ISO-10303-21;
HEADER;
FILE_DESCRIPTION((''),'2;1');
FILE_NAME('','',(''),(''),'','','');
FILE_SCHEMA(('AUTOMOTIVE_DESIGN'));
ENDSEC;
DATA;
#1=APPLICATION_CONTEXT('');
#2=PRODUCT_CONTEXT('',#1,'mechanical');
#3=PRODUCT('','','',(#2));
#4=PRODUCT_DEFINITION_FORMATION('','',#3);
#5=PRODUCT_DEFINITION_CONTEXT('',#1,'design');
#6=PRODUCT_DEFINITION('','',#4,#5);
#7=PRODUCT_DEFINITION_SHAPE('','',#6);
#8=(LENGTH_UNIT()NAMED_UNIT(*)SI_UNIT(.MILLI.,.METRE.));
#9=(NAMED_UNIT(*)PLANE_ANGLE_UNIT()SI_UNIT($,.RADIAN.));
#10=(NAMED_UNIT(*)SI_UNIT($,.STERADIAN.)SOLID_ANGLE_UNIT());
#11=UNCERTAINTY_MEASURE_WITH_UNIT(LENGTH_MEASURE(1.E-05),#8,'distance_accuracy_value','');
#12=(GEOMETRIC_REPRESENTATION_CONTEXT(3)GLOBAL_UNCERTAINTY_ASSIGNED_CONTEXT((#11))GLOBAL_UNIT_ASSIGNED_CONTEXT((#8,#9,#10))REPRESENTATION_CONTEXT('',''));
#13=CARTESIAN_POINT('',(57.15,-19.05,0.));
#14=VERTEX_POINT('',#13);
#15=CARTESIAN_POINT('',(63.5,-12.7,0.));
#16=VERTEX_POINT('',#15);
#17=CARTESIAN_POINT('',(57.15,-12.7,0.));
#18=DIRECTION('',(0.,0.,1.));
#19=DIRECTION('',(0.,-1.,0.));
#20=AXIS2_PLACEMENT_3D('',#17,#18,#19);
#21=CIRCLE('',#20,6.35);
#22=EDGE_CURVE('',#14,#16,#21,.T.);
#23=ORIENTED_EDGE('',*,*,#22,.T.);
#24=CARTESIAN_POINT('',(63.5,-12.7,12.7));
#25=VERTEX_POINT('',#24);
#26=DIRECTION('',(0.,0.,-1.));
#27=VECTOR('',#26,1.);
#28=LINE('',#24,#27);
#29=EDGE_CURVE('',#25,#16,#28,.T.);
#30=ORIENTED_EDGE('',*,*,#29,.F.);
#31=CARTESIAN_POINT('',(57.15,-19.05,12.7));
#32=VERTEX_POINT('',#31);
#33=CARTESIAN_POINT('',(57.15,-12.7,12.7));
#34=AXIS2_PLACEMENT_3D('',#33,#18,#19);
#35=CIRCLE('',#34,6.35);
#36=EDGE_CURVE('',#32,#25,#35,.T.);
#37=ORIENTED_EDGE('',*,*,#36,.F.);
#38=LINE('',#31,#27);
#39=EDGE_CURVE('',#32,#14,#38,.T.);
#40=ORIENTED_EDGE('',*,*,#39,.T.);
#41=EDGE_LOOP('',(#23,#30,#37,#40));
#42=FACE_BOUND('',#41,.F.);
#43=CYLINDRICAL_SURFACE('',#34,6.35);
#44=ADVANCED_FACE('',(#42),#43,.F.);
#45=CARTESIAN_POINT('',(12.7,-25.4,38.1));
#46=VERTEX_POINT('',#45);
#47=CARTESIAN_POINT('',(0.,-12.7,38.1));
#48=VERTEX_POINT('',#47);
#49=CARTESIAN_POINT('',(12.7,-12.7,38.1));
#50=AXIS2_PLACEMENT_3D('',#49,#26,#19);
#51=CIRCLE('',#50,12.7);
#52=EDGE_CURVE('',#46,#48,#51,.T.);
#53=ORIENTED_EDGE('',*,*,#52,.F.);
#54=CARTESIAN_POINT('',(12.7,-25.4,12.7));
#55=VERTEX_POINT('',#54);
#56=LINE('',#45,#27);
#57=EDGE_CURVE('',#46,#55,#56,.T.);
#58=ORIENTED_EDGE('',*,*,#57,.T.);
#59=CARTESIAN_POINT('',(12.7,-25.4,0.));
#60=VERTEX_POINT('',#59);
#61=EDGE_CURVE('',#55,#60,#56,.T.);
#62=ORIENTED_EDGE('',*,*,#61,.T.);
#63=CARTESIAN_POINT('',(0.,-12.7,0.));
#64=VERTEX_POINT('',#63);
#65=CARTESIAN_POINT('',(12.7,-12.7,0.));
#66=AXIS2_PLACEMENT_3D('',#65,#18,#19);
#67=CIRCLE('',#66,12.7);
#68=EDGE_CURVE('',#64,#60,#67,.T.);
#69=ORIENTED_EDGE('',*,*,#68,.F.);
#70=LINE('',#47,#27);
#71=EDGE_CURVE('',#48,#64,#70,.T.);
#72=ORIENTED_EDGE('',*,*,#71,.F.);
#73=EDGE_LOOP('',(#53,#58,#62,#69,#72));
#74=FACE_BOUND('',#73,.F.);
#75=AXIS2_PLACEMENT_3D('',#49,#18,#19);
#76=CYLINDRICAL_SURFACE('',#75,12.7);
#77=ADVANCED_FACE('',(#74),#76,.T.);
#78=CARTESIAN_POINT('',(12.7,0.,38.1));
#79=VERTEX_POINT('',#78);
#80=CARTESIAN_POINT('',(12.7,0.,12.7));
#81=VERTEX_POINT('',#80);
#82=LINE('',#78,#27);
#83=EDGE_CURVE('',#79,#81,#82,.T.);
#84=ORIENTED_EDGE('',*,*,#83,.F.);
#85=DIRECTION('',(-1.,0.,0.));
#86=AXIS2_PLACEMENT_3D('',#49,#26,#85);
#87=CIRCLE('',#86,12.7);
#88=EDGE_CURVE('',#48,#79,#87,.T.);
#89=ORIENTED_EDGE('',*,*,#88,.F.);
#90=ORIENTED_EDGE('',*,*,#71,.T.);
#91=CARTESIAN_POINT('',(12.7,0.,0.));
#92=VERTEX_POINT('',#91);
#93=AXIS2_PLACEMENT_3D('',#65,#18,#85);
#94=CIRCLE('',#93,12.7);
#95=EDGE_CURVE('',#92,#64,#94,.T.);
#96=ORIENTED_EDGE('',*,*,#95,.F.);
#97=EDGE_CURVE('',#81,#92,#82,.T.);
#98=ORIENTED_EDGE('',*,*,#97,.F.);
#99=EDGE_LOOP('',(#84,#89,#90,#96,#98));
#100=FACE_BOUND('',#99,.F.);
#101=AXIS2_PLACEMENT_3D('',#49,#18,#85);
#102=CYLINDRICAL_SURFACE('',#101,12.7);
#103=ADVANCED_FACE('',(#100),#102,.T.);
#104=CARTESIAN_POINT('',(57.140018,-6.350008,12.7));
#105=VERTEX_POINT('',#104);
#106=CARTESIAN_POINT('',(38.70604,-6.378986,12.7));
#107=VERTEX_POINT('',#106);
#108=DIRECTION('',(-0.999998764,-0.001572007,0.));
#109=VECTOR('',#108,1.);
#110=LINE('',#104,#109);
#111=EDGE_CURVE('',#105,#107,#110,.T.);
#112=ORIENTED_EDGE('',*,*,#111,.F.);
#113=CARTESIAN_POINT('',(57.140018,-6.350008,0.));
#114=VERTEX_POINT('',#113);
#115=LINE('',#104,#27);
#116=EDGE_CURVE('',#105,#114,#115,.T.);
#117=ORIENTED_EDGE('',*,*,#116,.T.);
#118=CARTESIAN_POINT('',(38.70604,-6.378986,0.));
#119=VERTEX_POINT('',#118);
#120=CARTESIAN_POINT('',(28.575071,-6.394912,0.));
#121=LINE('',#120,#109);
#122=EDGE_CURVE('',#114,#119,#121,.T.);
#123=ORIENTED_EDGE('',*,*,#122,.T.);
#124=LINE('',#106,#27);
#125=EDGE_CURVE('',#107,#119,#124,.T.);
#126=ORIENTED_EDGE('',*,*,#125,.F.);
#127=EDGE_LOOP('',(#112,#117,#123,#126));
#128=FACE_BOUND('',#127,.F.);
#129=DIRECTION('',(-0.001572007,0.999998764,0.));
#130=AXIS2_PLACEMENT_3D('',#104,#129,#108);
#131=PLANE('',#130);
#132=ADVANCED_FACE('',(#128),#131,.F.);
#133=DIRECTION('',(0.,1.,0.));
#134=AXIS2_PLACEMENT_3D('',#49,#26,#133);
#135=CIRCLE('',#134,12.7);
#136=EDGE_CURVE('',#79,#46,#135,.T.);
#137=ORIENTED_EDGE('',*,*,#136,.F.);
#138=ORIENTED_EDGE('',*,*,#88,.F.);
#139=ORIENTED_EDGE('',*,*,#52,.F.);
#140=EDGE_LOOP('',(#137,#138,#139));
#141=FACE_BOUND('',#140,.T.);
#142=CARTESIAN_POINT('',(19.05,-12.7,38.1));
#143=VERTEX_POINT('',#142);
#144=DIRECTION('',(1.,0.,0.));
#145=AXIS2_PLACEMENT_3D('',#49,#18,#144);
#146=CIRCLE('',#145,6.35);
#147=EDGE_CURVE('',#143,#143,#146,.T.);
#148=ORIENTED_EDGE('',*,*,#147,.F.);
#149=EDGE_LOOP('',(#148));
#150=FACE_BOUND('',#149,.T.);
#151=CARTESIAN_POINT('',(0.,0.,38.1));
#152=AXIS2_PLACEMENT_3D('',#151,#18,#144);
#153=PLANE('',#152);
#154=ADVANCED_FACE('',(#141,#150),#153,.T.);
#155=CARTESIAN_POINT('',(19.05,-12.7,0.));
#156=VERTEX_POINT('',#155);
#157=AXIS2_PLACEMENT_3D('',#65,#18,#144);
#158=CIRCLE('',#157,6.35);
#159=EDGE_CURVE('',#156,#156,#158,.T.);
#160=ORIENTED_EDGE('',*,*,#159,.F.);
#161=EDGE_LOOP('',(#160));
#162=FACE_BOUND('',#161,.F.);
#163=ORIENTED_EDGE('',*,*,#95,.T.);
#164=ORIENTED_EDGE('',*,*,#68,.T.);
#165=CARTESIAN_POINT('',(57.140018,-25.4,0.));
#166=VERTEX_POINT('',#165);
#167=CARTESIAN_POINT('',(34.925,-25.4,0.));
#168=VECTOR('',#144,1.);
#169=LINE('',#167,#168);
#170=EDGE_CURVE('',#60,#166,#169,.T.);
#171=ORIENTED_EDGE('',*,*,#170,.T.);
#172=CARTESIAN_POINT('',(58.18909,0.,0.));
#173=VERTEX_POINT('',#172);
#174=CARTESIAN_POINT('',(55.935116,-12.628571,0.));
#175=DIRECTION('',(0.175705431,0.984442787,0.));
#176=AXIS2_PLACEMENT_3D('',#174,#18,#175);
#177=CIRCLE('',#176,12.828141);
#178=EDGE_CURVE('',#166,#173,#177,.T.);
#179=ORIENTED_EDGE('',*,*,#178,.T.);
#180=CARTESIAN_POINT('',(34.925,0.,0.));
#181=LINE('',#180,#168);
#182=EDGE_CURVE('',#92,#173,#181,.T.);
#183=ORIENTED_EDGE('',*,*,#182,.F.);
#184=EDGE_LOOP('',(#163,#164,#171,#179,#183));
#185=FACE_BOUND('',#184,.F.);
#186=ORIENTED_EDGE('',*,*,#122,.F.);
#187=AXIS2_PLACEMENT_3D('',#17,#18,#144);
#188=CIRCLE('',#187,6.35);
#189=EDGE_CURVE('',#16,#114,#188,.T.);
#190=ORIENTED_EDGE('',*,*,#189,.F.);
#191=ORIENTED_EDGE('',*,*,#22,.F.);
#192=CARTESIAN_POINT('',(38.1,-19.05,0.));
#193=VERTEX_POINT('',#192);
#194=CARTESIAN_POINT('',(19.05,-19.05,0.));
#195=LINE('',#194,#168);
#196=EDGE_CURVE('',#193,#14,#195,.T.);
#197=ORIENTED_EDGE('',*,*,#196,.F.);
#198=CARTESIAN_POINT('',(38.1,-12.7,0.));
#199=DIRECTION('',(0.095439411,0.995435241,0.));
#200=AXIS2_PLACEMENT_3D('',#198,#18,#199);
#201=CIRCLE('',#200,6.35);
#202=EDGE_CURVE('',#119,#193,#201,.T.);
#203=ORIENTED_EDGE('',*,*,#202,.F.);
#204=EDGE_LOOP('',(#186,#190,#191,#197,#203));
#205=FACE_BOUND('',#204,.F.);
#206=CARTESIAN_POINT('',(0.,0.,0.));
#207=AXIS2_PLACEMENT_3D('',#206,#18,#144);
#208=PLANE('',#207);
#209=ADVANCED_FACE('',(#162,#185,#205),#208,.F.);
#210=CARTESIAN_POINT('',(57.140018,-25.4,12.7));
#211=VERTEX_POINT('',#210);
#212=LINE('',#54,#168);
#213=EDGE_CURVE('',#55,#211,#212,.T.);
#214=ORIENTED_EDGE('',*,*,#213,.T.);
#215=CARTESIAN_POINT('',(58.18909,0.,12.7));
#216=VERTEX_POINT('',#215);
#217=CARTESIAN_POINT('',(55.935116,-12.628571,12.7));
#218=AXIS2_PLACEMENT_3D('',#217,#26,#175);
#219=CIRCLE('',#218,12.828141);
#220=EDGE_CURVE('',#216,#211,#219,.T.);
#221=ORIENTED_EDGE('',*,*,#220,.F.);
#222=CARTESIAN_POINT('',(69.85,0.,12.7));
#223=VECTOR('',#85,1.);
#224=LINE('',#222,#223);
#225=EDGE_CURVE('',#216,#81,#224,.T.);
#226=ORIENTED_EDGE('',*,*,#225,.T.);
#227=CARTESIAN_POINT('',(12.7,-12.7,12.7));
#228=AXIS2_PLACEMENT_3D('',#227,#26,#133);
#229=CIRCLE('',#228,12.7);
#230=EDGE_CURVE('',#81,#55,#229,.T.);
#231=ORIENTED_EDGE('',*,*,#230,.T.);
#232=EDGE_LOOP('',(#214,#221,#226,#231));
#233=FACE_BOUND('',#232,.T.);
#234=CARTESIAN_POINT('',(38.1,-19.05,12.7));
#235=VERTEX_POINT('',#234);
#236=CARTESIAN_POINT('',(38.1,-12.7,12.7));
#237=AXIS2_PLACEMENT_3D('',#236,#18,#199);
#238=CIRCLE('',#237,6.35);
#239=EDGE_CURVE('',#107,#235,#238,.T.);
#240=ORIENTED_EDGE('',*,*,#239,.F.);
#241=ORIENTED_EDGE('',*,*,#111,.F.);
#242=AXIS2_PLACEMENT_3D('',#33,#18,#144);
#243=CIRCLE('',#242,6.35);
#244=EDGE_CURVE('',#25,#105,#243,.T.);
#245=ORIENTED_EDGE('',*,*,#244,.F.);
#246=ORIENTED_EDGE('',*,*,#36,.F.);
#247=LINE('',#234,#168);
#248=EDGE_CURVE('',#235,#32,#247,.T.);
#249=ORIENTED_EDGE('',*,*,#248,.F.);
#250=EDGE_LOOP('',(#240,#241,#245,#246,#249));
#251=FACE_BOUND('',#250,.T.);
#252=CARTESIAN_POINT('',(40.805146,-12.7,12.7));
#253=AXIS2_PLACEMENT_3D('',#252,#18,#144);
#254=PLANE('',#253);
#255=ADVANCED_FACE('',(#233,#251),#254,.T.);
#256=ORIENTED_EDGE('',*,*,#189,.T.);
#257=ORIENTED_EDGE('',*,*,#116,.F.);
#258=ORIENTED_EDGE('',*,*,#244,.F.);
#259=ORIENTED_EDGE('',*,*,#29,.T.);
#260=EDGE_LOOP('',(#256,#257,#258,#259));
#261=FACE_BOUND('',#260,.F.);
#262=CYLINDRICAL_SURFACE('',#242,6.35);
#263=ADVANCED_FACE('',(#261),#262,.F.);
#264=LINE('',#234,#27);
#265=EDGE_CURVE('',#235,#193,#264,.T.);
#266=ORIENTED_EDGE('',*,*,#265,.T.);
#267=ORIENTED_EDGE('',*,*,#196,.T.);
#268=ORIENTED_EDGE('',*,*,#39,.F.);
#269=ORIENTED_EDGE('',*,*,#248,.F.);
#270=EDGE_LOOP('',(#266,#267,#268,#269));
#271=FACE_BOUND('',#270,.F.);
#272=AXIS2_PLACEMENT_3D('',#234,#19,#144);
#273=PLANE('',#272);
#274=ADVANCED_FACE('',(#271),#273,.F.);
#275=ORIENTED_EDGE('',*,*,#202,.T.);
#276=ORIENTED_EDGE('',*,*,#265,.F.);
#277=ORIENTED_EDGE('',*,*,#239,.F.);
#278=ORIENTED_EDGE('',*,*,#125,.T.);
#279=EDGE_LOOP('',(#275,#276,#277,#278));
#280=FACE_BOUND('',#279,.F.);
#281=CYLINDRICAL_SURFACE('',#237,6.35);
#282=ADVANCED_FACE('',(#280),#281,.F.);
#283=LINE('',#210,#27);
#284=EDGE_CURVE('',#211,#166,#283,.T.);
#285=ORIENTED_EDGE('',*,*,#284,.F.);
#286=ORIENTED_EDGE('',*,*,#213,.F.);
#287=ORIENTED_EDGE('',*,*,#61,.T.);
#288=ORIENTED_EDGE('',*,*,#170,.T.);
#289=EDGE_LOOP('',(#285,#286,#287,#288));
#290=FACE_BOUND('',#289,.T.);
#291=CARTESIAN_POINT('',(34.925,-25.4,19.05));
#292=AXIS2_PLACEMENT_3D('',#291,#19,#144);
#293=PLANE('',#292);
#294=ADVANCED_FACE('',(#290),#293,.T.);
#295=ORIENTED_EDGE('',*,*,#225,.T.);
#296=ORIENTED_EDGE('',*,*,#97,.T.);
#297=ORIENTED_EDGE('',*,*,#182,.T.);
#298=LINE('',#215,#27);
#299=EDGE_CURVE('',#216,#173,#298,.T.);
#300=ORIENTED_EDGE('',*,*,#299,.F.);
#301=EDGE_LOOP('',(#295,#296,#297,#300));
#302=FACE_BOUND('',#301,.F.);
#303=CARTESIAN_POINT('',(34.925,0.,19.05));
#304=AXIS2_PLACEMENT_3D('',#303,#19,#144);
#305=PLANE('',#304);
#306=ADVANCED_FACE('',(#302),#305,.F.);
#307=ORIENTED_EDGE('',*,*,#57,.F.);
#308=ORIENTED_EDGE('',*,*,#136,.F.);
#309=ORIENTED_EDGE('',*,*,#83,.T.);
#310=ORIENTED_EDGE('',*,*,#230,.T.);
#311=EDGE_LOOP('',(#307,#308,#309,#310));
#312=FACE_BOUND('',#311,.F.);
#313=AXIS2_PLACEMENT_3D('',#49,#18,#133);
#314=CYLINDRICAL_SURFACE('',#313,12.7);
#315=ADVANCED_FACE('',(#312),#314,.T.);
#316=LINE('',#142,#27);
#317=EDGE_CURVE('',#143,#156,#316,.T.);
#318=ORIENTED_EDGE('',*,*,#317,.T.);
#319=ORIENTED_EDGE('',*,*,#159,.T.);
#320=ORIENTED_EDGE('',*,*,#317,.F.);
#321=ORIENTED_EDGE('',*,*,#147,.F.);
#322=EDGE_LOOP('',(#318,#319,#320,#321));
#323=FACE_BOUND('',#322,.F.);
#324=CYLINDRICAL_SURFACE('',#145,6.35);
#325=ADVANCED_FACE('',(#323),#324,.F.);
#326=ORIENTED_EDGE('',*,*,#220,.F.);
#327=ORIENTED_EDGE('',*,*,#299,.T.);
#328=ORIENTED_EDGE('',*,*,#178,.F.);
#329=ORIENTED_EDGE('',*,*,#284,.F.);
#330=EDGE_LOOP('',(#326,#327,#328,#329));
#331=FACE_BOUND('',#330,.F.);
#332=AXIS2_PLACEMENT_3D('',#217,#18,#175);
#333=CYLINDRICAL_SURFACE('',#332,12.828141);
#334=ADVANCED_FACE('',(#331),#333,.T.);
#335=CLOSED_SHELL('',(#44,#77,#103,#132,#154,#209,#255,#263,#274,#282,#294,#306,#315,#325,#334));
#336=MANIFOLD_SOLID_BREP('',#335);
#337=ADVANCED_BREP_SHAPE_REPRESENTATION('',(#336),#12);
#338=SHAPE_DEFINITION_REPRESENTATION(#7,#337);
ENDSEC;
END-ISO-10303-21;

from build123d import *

# Parameters (mm, degrees)
F0_W      = 69.85
F0_H      = 38.1
F1_DEPTH  = 25.4
F5_DEPTH  = 50.8
F7_DEPTH  = 25.4
F8_R      = 6.35
F9_DEPTH  = 50.8
F11_DEPTH = 25.4
F13_DEPTH = 25.4


# Not quite as in the source:
# - a feature of the source that left no trace in its solid (it failed there, or was rolled back) is left out


with BuildPart() as f1:
    # F0 (on Front) → F1 (new body)
    with BuildSketch(Plane.XZ):
        with Locations((34.925, 19.05)):
            Rectangle(F0_W, F0_H)
    extrude(amount=F1_DEPTH)

    # F4 (on face) → F5 (cut)
    with BuildSketch(Plane.XY.offset(38.1)):
        with BuildLine():
            ThreePointArc((0, -12.7), (3.7197438789, -3.7197438789), (12.7, 0))
            Line((12.7, 0), (0, 0))
            Line((0, 0), (0, -12.7))
        make_face()
        with BuildLine():
            Line((0, -25.4), (12.7, -25.4))
            ThreePointArc((12.7, -25.4), (3.7197438789, -21.6802561211), (0, -12.7))
            Line((0, -12.7), (0, -25.4))
        make_face()
    extrude(amount=-F5_DEPTH, mode=Mode.SUBTRACT)

    # F6 (on face) → F7 (cut)
    with BuildSketch(Plane.XY.offset(38.1)):
        with BuildLine():
            ThreePointArc((12.7, 0), (25.4, -12.7), (12.7, -25.4))
            Line((12.7, -25.4), (69.85, -25.4))
            Line((69.85, -25.4), (69.85, 0))
            Line((69.85, 0), (12.7, 0))
        make_face()
    extrude(amount=-F7_DEPTH, mode=Mode.SUBTRACT)

    # F8 (on face) → F9 (cut)
    with BuildSketch(Plane.XY.offset(38.1)):
        with Locations((12.7, -12.7)):
            Circle(F8_R)
    extrude(amount=-F9_DEPTH, mode=Mode.SUBTRACT)

    # F10 (on face) → F11 (cut)
    with BuildSketch(Plane.XY.offset(12.7)):
        with BuildLine():
            ThreePointArc((38.1, -19.05), (42.5901280605, -17.1901280605), (44.45, -12.7))
            ThreePointArc((44.45, -12.7), (42.7995135722, -8.4295114817), (38.7060402567, -6.37898622))
            Line((38.7060402567, -6.37898622), (38.1, -19.05))
        make_face()
        with BuildLine():
            ThreePointArc((38.7060402567, -6.37898622), (42.7995135722, -8.4295114817), (44.45, -12.7))
            ThreePointArc((44.45, -12.7), (42.5901280605, -17.1901280605), (38.1, -19.05))
            Line((38.1, -19.05), (57.15, -19.05))
            ThreePointArc((57.15, -19.05), (50.8000019615, -12.7049911232), (57.1400177568, -6.3500078461))
            Line((57.1400177568, -6.3500078461), (38.7060402567, -6.37898622))
        make_face()
        with BuildLine():
            Line((38.1, -19.05), (38.7060402567, -6.37898622))
            ThreePointArc((38.7060402567, -6.37898622), (31.7572506946, -12.3966334751), (38.1, -19.05))
        make_face()
        with BuildLine():
            Line((57.15, -19.05), (57.1400177568, -6.3500078461))
            ThreePointArc((57.1400177568, -6.3500078461), (50.8000019615, -12.7049911232), (57.15, -19.05))
        make_face()
        with BuildLine():
            ThreePointArc((63.5, -12.7), (61.6365974165, -8.2063440694), (57.1400177568, -6.3500078461))
            Line((57.1400177568, -6.3500078461), (57.15, -19.05))
            ThreePointArc((57.15, -19.05), (61.6401280605, -17.1901280605), (63.5, -12.7))
        make_face()
    extrude(amount=-F11_DEPTH, mode=Mode.SUBTRACT)

    # F12 (on face) → F13 (cut)
    with BuildSketch(Plane.XY.offset(12.7)):
        with BuildLine():
            ThreePointArc((58.1890903413, 0), (68.7523295615, -13.1579480832), (57.1400177568, -25.4))
            Line((57.1400177568, -25.4), (69.85, -25.4))
            Line((69.85, -25.4), (69.85, 0))
            Line((69.85, 0), (58.1890903413, 0))
        make_face()
    extrude(amount=-F13_DEPTH, mode=Mode.SUBTRACT)


solid = f1.part
